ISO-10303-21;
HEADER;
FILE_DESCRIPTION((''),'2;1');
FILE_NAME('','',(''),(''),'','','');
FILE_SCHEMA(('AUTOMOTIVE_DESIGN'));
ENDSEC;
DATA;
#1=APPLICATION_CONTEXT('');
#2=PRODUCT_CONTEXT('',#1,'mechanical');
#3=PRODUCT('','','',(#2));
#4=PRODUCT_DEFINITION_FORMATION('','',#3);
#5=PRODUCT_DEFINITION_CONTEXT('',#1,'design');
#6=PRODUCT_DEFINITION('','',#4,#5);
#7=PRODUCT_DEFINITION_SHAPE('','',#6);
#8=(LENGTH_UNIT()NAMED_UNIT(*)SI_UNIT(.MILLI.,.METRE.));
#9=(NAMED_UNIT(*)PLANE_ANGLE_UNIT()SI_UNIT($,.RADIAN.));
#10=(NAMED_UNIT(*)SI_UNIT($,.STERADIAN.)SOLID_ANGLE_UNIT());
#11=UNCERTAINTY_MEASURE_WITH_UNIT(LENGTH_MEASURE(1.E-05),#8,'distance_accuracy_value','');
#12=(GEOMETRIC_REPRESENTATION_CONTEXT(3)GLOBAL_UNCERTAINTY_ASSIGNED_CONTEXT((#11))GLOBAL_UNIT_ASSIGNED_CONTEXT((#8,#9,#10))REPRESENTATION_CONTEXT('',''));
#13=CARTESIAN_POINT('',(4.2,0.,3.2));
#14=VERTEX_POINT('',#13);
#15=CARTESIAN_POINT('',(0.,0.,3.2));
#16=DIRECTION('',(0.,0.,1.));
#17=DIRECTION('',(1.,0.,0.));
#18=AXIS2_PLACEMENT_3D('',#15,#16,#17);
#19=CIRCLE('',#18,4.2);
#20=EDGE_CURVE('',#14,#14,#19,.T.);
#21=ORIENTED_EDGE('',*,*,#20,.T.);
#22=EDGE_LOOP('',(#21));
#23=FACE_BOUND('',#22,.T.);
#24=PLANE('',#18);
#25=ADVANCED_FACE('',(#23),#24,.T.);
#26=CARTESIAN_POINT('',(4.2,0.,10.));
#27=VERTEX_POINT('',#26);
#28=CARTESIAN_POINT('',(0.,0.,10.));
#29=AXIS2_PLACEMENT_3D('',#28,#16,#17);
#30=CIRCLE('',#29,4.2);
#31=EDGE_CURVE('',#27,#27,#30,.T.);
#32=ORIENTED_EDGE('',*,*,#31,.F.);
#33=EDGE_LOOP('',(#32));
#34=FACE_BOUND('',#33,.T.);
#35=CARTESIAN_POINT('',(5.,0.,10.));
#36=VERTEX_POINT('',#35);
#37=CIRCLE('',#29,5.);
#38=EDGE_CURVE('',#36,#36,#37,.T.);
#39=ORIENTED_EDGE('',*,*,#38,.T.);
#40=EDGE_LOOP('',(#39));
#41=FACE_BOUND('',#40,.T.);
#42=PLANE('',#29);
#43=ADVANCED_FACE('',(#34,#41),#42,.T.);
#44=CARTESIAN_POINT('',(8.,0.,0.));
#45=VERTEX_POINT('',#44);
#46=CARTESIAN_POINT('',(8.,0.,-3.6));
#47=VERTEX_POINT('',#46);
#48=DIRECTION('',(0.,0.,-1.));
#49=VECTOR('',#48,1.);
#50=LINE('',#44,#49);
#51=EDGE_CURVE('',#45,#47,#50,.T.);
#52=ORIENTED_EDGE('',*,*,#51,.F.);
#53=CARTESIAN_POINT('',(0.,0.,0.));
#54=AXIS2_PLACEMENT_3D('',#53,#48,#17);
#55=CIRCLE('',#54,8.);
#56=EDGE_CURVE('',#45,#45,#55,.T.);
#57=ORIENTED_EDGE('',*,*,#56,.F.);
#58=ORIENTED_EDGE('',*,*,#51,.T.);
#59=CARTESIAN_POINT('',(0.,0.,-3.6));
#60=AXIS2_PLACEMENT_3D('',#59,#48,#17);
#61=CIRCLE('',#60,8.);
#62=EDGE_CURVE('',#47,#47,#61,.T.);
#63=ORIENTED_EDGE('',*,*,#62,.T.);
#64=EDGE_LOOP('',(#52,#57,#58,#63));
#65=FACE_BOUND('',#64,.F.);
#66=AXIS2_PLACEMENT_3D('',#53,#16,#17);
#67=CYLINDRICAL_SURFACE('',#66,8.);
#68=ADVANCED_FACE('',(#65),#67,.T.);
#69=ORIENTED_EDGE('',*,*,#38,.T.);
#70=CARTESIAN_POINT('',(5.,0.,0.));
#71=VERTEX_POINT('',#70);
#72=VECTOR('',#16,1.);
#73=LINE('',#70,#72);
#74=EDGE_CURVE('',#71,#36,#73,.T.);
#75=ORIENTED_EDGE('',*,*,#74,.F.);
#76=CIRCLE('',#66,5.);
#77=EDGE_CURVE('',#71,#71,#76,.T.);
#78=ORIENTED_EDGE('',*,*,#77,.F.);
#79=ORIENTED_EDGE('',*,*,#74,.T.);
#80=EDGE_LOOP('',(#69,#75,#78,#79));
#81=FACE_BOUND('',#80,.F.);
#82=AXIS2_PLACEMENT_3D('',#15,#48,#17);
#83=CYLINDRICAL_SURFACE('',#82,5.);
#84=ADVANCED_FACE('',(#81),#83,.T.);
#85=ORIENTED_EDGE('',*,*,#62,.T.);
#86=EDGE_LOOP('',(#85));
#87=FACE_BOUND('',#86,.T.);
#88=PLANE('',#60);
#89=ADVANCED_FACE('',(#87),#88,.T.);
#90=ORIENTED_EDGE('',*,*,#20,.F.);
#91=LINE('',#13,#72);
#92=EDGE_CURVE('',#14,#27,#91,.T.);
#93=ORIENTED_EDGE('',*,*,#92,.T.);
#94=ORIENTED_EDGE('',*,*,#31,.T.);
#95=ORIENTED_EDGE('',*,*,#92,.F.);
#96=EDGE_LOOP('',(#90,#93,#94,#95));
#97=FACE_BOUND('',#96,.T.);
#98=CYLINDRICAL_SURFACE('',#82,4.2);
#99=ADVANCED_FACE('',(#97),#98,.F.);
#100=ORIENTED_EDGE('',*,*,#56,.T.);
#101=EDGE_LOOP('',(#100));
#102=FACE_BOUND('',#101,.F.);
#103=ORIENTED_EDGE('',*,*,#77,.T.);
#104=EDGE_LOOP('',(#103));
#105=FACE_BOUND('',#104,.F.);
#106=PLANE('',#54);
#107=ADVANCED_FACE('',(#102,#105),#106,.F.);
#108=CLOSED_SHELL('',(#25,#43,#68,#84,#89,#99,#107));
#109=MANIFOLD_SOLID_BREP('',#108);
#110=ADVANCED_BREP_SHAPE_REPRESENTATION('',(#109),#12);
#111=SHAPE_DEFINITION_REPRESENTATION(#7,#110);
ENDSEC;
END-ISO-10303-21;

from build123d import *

# Parameters (mm, degrees)
F0_R     = 5
F1_DEPTH = 3.2
F2_R     = 5
F2_R_2   = 4.2
F3_DEPTH = 6.8
F4_R     = 8
F4_R_2   = 5
F5_DEPTH = 3.6


with BuildPart() as f1:
    # F0 (on Top) → F1 (new body)
    with BuildSketch(Plane.XY):
        Circle(F0_R)
    extrude(amount=F1_DEPTH)

    # F2 (on face) → F3 (join)
    with BuildSketch(Plane.XY.offset(3.2)):
        Circle(F2_R)
        Circle(F2_R_2, mode=Mode.SUBTRACT)
    extrude(amount=F3_DEPTH)

    # F4 (on face) → F5 (join)
    with BuildSketch(Plane(origin=(0, 0, 0), x_dir=(1, 0, 0), z_dir=(0, 0, -1))):
        Circle(F4_R)
        Circle(F4_R_2, mode=Mode.SUBTRACT)
        Circle(F4_R_2)
    extrude(amount=F5_DEPTH)


solid = f1.part
